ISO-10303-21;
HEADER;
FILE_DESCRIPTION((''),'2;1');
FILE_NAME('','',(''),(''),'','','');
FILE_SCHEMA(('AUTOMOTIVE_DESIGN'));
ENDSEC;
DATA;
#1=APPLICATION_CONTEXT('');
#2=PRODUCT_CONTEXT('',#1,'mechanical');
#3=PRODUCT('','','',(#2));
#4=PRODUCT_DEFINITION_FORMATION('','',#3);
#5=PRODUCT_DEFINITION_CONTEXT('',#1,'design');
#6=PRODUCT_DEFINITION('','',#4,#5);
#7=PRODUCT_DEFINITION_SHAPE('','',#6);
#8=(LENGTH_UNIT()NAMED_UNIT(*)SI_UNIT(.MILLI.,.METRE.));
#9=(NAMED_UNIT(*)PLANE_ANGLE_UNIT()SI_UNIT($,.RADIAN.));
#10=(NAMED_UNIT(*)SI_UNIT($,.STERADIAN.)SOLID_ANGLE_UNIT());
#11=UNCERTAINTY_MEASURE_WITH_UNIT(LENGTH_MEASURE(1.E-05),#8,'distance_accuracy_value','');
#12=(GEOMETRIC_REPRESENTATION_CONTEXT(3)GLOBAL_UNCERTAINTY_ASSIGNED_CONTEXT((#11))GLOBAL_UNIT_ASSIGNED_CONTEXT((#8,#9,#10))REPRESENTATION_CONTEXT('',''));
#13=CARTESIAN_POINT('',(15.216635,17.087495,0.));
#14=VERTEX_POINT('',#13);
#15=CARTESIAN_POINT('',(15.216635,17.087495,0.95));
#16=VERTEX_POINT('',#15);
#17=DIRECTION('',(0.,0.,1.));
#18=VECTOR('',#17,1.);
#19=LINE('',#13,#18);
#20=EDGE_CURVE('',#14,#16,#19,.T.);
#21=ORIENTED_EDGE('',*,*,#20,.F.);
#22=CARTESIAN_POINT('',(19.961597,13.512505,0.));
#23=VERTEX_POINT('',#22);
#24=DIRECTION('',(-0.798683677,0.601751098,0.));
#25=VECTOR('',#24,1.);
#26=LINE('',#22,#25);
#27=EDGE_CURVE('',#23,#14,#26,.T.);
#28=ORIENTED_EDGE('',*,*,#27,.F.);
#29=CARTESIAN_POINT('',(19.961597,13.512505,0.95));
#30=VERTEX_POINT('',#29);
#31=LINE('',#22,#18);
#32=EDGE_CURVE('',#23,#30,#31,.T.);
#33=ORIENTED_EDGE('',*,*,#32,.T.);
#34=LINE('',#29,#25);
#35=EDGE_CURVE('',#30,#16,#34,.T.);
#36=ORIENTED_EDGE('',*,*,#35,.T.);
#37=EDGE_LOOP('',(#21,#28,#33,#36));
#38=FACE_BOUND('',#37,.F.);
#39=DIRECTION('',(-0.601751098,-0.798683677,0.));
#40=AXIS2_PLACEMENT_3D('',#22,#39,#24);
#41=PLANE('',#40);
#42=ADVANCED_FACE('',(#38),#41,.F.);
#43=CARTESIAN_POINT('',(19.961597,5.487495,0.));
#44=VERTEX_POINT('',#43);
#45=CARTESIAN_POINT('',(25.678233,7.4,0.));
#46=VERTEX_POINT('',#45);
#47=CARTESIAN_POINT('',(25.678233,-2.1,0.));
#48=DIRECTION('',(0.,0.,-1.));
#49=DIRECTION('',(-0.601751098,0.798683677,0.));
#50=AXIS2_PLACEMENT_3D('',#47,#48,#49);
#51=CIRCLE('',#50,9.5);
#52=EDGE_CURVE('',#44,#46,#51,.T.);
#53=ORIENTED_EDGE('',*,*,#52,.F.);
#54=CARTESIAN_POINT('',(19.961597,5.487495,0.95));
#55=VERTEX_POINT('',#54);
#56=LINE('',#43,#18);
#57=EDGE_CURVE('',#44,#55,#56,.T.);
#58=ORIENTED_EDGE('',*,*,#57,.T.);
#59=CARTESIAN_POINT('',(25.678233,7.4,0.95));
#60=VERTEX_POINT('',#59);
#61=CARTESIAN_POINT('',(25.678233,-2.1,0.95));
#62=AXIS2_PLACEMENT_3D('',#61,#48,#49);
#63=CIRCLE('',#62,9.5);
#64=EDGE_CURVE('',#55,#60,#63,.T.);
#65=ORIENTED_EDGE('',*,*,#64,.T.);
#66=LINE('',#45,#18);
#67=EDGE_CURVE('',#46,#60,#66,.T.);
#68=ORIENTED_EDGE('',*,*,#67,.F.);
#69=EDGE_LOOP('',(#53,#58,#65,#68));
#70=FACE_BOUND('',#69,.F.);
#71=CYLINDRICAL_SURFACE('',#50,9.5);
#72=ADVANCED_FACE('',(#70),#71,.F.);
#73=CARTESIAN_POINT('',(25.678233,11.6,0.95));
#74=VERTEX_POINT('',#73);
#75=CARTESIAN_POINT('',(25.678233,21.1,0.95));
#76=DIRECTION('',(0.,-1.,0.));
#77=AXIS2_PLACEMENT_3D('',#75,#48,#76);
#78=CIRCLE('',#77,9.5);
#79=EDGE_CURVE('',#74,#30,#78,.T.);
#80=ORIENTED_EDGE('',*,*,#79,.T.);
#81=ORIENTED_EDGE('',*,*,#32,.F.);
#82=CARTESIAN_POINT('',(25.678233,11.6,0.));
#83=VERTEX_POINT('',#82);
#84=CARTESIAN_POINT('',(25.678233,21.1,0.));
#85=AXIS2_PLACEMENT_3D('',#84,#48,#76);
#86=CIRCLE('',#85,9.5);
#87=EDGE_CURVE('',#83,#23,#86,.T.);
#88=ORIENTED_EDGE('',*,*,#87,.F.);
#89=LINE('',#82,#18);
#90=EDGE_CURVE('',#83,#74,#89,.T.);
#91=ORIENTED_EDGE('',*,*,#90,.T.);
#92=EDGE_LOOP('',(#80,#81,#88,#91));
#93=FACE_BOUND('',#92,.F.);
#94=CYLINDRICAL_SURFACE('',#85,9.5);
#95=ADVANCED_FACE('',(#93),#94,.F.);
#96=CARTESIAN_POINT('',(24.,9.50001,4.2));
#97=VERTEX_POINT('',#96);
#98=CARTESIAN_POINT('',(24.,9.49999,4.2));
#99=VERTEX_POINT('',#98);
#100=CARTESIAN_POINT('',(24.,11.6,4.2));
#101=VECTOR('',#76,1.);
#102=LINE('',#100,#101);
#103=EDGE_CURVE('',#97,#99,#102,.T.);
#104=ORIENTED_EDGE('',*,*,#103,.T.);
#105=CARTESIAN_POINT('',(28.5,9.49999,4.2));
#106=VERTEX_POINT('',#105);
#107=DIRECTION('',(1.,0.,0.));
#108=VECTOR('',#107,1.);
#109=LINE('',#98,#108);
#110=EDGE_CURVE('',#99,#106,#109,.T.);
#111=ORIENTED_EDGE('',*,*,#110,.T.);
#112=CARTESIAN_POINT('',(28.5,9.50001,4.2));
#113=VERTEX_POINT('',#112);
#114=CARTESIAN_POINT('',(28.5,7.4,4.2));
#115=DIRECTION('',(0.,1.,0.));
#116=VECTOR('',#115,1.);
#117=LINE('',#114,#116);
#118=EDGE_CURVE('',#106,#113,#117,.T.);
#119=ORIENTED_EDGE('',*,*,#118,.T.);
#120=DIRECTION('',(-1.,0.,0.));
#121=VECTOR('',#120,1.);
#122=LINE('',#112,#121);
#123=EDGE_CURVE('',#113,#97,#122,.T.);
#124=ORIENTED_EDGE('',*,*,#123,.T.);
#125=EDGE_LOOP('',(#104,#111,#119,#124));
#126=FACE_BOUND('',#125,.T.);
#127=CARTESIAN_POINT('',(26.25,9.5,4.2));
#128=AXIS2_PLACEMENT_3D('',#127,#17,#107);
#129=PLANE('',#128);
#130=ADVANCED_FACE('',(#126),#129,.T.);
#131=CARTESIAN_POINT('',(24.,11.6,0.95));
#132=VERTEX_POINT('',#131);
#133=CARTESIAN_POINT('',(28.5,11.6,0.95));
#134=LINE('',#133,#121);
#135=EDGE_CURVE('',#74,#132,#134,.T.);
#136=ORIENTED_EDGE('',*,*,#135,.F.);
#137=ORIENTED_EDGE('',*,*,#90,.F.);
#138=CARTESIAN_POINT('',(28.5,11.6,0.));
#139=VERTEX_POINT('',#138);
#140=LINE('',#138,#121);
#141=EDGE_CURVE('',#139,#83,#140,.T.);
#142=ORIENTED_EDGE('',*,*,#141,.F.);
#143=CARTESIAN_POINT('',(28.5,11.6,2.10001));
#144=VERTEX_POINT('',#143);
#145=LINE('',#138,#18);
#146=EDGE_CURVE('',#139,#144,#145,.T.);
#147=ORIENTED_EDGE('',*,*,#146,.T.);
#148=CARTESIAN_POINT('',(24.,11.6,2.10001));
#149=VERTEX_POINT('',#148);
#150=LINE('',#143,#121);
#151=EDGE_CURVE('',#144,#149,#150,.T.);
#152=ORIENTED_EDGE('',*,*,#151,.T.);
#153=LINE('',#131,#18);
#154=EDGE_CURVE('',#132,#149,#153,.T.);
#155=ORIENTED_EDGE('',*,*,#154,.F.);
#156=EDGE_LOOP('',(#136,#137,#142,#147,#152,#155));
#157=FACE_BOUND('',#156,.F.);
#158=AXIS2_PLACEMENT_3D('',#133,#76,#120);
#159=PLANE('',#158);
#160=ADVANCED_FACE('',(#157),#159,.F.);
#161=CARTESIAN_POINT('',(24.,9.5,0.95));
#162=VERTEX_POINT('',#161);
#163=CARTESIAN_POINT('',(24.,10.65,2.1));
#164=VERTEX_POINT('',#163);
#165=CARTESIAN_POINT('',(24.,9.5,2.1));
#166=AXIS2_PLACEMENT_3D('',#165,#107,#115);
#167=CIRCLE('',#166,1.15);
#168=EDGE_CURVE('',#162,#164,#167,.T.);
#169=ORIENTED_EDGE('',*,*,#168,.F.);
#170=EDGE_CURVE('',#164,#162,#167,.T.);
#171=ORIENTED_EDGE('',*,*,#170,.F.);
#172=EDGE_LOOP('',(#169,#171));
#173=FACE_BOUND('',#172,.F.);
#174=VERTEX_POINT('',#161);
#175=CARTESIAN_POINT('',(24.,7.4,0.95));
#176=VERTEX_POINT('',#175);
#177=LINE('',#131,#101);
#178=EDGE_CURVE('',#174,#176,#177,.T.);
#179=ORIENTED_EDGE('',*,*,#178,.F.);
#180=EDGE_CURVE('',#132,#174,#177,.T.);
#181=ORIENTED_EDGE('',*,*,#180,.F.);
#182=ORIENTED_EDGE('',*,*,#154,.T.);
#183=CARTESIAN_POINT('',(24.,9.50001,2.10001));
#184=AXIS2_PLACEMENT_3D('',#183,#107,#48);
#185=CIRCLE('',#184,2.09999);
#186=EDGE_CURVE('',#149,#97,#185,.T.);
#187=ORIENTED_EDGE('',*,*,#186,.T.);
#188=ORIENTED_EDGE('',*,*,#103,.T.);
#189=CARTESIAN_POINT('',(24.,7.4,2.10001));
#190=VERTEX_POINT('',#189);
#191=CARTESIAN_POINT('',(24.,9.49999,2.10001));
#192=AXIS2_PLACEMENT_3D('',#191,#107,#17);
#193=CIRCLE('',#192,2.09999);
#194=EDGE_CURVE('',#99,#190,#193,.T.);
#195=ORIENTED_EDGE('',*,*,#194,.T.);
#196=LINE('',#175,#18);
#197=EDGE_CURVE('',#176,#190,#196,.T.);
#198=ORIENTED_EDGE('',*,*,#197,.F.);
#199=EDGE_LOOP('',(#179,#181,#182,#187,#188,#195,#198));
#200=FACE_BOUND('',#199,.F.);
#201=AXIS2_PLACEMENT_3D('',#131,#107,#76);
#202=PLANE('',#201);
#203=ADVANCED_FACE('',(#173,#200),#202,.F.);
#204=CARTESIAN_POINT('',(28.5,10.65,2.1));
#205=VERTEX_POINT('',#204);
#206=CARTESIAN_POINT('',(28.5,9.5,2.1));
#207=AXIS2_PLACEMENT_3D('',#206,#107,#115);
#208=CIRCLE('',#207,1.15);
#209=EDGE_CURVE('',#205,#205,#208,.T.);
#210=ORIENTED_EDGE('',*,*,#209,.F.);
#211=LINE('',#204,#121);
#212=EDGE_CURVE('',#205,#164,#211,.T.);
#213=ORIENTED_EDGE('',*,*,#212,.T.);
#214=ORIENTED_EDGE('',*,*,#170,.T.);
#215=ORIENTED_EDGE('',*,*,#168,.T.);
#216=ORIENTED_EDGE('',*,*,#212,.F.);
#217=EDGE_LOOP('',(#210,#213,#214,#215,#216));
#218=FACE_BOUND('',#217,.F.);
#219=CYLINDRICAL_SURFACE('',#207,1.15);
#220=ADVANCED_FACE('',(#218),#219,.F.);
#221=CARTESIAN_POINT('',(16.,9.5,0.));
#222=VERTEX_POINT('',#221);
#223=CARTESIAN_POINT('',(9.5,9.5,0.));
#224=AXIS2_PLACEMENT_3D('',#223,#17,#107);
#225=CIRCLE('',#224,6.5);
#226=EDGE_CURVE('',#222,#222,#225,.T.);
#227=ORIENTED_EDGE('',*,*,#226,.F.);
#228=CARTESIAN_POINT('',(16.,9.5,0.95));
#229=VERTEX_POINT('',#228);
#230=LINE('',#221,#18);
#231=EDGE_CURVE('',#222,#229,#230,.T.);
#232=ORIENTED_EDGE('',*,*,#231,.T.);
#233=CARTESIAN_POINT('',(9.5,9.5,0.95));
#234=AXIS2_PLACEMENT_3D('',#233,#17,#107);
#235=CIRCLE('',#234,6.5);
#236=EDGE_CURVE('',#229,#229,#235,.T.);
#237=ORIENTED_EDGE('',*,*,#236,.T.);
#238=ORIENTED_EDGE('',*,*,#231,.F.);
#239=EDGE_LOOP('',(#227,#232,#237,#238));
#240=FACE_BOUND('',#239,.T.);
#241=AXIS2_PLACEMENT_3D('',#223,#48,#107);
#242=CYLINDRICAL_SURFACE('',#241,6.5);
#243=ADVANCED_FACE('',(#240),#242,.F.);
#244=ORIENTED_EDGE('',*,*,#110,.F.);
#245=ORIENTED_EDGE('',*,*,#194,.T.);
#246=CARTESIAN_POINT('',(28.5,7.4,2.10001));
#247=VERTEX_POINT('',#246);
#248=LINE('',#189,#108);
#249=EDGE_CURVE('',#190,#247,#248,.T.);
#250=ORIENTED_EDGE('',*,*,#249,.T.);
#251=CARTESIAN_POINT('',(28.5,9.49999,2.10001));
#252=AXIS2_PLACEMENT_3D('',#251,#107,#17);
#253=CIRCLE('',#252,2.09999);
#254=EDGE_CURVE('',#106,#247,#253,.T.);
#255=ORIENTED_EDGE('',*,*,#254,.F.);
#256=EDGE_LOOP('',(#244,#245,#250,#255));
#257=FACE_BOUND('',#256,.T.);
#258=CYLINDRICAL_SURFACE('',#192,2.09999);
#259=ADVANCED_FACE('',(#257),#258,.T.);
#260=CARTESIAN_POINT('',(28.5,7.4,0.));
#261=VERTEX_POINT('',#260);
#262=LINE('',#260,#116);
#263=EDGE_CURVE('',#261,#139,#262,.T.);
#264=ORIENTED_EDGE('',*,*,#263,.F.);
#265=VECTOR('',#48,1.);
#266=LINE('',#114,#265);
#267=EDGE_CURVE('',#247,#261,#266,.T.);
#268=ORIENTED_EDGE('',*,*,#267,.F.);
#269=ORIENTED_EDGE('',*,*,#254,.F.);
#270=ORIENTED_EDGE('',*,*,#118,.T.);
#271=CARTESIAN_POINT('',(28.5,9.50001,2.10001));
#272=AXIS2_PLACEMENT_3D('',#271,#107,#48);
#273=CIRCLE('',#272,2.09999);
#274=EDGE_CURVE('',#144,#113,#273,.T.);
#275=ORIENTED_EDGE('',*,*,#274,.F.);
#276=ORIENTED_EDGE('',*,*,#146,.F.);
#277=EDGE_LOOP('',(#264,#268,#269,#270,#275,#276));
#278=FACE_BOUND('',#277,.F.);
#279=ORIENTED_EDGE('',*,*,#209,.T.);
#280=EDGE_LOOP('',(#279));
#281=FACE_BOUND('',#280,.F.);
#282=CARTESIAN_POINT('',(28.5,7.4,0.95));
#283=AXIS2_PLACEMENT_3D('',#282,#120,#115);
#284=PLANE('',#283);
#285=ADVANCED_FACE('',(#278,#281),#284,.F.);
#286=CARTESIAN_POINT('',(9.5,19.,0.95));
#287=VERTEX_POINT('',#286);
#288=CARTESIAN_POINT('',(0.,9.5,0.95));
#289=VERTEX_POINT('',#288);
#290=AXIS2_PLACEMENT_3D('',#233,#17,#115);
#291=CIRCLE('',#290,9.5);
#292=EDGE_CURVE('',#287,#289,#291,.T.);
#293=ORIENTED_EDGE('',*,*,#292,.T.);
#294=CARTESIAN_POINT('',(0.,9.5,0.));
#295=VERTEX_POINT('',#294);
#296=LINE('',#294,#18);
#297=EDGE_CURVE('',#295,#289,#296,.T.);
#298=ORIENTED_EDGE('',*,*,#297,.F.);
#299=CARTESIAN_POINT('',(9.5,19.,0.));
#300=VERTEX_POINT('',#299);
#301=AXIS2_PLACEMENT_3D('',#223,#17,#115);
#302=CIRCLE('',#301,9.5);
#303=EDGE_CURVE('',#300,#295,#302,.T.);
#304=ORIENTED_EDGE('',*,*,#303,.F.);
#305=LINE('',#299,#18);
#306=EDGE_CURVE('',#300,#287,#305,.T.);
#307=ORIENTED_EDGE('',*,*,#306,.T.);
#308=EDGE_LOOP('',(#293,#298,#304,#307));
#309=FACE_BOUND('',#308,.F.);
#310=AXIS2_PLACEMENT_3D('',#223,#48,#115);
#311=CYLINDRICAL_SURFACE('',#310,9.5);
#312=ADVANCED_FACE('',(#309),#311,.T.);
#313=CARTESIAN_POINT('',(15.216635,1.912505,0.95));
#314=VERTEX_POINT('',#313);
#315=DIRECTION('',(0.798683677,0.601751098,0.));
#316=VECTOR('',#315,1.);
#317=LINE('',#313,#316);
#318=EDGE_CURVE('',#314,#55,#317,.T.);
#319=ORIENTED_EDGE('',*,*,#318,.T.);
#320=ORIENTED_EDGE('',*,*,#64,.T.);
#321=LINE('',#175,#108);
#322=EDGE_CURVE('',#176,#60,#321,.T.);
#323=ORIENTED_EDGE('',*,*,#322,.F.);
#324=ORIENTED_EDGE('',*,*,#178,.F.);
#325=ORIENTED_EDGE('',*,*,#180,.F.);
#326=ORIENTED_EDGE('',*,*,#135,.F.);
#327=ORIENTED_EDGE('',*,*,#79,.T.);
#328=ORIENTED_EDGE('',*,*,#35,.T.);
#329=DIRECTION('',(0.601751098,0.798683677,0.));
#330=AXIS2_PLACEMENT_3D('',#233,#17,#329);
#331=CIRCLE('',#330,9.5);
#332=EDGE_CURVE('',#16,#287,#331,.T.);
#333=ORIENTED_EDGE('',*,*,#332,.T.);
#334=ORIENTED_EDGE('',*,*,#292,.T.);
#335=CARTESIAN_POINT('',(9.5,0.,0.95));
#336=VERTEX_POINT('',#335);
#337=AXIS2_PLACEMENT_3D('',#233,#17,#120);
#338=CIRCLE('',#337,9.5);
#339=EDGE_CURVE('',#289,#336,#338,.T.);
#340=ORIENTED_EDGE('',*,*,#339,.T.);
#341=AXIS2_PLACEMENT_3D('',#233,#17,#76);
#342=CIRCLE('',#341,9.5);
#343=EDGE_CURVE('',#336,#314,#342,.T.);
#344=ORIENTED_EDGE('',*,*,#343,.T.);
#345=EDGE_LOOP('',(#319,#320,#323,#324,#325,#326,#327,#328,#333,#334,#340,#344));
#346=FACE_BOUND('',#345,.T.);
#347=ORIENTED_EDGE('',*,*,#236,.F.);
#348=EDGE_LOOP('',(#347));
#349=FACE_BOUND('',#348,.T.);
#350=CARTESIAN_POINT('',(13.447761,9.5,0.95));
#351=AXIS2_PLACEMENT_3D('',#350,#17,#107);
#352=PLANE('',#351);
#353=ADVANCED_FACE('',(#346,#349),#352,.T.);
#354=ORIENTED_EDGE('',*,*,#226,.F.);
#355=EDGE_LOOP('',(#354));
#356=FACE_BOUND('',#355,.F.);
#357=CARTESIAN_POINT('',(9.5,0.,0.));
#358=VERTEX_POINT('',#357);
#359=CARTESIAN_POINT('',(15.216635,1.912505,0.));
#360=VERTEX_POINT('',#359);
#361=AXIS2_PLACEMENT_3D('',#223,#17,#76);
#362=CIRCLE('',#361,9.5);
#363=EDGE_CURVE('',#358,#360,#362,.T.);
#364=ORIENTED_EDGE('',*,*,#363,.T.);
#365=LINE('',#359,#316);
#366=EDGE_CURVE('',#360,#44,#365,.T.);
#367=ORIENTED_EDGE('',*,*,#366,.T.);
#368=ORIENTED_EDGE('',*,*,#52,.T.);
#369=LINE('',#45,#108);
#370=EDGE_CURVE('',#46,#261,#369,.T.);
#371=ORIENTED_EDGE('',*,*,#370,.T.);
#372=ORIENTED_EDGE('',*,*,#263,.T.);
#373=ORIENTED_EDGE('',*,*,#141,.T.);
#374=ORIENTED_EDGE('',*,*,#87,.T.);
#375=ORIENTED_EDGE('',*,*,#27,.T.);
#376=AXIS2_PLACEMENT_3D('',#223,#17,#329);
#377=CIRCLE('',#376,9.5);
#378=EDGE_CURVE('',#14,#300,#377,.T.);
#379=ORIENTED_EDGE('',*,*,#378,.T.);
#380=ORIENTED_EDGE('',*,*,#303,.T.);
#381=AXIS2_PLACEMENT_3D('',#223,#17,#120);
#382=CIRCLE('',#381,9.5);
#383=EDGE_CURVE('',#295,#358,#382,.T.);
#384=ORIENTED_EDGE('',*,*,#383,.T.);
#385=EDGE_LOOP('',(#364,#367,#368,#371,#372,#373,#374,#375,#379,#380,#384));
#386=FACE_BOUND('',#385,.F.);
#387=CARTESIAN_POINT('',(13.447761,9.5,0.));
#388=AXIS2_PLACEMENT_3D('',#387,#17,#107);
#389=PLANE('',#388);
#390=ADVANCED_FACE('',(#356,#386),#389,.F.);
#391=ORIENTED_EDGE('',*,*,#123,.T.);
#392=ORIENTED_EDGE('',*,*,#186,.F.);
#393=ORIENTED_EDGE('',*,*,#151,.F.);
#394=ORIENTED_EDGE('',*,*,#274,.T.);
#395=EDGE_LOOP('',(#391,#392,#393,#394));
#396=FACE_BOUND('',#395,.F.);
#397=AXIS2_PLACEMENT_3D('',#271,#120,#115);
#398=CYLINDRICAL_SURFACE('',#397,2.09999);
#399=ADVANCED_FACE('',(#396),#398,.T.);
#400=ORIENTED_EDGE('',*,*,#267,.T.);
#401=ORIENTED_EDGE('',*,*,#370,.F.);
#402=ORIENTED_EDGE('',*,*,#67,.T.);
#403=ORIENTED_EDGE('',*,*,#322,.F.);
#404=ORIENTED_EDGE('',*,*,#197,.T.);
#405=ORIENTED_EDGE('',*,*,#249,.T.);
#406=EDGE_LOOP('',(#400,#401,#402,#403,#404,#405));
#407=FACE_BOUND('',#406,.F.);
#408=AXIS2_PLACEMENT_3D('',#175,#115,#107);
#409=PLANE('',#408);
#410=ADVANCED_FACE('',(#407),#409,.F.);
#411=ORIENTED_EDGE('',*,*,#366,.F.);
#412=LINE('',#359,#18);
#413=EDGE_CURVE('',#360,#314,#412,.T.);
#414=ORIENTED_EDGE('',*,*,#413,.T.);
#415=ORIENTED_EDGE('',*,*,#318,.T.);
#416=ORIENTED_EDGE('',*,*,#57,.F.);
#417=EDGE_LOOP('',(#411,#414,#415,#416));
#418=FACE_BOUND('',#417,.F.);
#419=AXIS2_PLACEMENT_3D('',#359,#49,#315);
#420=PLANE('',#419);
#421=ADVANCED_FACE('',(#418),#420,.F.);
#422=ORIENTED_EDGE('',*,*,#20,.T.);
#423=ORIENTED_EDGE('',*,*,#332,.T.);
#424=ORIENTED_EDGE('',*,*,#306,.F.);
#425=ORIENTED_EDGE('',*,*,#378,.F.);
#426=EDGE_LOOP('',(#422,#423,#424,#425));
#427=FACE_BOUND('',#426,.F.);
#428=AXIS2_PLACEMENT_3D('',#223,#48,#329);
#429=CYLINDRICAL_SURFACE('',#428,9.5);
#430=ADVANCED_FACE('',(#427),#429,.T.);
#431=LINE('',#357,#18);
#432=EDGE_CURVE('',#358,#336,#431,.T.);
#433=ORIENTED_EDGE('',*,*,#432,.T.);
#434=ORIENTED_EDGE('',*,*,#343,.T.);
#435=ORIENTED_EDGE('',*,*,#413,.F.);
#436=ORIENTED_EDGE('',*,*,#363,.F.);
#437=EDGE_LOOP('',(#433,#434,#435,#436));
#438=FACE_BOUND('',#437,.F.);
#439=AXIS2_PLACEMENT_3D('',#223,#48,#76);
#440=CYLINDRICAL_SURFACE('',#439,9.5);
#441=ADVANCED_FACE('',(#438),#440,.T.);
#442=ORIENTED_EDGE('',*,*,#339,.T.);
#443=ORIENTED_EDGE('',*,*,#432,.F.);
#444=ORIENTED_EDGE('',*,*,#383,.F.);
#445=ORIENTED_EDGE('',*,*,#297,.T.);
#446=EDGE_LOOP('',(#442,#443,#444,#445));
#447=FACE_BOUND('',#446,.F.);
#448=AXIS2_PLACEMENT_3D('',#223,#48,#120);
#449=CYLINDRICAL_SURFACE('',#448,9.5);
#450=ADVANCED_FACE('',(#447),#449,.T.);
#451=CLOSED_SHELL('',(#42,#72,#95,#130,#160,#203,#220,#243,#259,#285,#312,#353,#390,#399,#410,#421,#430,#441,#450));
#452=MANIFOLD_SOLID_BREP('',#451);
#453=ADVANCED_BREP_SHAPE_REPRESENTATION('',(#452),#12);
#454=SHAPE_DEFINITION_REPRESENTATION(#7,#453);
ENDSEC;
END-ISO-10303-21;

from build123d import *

# Parameters (mm, degrees)
F0_R     = 6.5
F1_DEPTH = 0.95
F3_DEPTH = 3.25
F4_R     = 2.09999
F5_R     = 1.15
F6_DEPTH = 25


# Not quite as in the source:
# - a fillet or chamfer is up to 0.001 mm smaller than in the source, because OpenCascade refuses the exact size


with BuildPart() as f1:
    # F0 (on Top) → F1 (new body)
    with BuildSketch(Plane.XY):
        with BuildLine():
            Line((25.6782327866, 7.4), (28.5, 7.4))
            Line((28.5, 7.4), (28.5, 11.6))
            Line((28.5, 11.6), (25.6782327866, 11.6))
            ThreePointArc((25.6782327866, 11.6), (22.6641990968, 12.0908046465), (19.9615973522, 13.5125050702))
            Line((19.9615973522, 13.5125050702), (15.2166354344, 17.0874949298))
            ThreePointArc((15.2166354344, 17.0874949298), (12.5140336898, 18.5091953535), (9.5, 19))
            ThreePointArc((9.5, 19), (2.7824855787, 16.2175144213), (0, 9.5))
            ThreePointArc((0, 9.5), (2.7824855787, 2.7824855787), (9.5, 0))
            ThreePointArc((9.5, 0), (12.5140336898, 0.4908046465), (15.2166354344, 1.9125050702))
            Line((15.2166354344, 1.9125050702), (19.9615973522, 5.4874949298))
            ThreePointArc((19.9615973522, 5.4874949298), (22.6641990968, 6.9091953535), (25.6782327866, 7.4))
        make_face()
        with Locations((9.5, 9.5)):
            Circle(F0_R, mode=Mode.SUBTRACT)
    extrude(amount=F1_DEPTH)

    # F2 (on face) → F3 (join)
    with BuildSketch(Plane.XY.offset(0.95)):
        Polygon((28.5, 7.4), (28.5, 11.6), (25.6782327866, 11.6), (24, 11.6), (24, 7.4), (25.6782327866, 7.4), align=None)
    extrude(amount=F3_DEPTH)

    # F4 (radius 2.1 in the source; OpenCascade refuses exactly that, so slightly less here)
    f4_edges = [f1.edges().sort_by_distance(p)[0] for p in [
        (26.25, 11.6, 4.2),
        (26.25, 7.4, 4.2),
    ]]
    fillet(f4_edges, radius=F4_R)

    # F5 (on face) → F6 (cut)
    with BuildSketch(Plane.YZ.offset(28.5)):
        with Locations((9.5, 2.1)):
            Circle(F5_R)
    extrude(amount=-F6_DEPTH, mode=Mode.SUBTRACT)


solid = f1.part
